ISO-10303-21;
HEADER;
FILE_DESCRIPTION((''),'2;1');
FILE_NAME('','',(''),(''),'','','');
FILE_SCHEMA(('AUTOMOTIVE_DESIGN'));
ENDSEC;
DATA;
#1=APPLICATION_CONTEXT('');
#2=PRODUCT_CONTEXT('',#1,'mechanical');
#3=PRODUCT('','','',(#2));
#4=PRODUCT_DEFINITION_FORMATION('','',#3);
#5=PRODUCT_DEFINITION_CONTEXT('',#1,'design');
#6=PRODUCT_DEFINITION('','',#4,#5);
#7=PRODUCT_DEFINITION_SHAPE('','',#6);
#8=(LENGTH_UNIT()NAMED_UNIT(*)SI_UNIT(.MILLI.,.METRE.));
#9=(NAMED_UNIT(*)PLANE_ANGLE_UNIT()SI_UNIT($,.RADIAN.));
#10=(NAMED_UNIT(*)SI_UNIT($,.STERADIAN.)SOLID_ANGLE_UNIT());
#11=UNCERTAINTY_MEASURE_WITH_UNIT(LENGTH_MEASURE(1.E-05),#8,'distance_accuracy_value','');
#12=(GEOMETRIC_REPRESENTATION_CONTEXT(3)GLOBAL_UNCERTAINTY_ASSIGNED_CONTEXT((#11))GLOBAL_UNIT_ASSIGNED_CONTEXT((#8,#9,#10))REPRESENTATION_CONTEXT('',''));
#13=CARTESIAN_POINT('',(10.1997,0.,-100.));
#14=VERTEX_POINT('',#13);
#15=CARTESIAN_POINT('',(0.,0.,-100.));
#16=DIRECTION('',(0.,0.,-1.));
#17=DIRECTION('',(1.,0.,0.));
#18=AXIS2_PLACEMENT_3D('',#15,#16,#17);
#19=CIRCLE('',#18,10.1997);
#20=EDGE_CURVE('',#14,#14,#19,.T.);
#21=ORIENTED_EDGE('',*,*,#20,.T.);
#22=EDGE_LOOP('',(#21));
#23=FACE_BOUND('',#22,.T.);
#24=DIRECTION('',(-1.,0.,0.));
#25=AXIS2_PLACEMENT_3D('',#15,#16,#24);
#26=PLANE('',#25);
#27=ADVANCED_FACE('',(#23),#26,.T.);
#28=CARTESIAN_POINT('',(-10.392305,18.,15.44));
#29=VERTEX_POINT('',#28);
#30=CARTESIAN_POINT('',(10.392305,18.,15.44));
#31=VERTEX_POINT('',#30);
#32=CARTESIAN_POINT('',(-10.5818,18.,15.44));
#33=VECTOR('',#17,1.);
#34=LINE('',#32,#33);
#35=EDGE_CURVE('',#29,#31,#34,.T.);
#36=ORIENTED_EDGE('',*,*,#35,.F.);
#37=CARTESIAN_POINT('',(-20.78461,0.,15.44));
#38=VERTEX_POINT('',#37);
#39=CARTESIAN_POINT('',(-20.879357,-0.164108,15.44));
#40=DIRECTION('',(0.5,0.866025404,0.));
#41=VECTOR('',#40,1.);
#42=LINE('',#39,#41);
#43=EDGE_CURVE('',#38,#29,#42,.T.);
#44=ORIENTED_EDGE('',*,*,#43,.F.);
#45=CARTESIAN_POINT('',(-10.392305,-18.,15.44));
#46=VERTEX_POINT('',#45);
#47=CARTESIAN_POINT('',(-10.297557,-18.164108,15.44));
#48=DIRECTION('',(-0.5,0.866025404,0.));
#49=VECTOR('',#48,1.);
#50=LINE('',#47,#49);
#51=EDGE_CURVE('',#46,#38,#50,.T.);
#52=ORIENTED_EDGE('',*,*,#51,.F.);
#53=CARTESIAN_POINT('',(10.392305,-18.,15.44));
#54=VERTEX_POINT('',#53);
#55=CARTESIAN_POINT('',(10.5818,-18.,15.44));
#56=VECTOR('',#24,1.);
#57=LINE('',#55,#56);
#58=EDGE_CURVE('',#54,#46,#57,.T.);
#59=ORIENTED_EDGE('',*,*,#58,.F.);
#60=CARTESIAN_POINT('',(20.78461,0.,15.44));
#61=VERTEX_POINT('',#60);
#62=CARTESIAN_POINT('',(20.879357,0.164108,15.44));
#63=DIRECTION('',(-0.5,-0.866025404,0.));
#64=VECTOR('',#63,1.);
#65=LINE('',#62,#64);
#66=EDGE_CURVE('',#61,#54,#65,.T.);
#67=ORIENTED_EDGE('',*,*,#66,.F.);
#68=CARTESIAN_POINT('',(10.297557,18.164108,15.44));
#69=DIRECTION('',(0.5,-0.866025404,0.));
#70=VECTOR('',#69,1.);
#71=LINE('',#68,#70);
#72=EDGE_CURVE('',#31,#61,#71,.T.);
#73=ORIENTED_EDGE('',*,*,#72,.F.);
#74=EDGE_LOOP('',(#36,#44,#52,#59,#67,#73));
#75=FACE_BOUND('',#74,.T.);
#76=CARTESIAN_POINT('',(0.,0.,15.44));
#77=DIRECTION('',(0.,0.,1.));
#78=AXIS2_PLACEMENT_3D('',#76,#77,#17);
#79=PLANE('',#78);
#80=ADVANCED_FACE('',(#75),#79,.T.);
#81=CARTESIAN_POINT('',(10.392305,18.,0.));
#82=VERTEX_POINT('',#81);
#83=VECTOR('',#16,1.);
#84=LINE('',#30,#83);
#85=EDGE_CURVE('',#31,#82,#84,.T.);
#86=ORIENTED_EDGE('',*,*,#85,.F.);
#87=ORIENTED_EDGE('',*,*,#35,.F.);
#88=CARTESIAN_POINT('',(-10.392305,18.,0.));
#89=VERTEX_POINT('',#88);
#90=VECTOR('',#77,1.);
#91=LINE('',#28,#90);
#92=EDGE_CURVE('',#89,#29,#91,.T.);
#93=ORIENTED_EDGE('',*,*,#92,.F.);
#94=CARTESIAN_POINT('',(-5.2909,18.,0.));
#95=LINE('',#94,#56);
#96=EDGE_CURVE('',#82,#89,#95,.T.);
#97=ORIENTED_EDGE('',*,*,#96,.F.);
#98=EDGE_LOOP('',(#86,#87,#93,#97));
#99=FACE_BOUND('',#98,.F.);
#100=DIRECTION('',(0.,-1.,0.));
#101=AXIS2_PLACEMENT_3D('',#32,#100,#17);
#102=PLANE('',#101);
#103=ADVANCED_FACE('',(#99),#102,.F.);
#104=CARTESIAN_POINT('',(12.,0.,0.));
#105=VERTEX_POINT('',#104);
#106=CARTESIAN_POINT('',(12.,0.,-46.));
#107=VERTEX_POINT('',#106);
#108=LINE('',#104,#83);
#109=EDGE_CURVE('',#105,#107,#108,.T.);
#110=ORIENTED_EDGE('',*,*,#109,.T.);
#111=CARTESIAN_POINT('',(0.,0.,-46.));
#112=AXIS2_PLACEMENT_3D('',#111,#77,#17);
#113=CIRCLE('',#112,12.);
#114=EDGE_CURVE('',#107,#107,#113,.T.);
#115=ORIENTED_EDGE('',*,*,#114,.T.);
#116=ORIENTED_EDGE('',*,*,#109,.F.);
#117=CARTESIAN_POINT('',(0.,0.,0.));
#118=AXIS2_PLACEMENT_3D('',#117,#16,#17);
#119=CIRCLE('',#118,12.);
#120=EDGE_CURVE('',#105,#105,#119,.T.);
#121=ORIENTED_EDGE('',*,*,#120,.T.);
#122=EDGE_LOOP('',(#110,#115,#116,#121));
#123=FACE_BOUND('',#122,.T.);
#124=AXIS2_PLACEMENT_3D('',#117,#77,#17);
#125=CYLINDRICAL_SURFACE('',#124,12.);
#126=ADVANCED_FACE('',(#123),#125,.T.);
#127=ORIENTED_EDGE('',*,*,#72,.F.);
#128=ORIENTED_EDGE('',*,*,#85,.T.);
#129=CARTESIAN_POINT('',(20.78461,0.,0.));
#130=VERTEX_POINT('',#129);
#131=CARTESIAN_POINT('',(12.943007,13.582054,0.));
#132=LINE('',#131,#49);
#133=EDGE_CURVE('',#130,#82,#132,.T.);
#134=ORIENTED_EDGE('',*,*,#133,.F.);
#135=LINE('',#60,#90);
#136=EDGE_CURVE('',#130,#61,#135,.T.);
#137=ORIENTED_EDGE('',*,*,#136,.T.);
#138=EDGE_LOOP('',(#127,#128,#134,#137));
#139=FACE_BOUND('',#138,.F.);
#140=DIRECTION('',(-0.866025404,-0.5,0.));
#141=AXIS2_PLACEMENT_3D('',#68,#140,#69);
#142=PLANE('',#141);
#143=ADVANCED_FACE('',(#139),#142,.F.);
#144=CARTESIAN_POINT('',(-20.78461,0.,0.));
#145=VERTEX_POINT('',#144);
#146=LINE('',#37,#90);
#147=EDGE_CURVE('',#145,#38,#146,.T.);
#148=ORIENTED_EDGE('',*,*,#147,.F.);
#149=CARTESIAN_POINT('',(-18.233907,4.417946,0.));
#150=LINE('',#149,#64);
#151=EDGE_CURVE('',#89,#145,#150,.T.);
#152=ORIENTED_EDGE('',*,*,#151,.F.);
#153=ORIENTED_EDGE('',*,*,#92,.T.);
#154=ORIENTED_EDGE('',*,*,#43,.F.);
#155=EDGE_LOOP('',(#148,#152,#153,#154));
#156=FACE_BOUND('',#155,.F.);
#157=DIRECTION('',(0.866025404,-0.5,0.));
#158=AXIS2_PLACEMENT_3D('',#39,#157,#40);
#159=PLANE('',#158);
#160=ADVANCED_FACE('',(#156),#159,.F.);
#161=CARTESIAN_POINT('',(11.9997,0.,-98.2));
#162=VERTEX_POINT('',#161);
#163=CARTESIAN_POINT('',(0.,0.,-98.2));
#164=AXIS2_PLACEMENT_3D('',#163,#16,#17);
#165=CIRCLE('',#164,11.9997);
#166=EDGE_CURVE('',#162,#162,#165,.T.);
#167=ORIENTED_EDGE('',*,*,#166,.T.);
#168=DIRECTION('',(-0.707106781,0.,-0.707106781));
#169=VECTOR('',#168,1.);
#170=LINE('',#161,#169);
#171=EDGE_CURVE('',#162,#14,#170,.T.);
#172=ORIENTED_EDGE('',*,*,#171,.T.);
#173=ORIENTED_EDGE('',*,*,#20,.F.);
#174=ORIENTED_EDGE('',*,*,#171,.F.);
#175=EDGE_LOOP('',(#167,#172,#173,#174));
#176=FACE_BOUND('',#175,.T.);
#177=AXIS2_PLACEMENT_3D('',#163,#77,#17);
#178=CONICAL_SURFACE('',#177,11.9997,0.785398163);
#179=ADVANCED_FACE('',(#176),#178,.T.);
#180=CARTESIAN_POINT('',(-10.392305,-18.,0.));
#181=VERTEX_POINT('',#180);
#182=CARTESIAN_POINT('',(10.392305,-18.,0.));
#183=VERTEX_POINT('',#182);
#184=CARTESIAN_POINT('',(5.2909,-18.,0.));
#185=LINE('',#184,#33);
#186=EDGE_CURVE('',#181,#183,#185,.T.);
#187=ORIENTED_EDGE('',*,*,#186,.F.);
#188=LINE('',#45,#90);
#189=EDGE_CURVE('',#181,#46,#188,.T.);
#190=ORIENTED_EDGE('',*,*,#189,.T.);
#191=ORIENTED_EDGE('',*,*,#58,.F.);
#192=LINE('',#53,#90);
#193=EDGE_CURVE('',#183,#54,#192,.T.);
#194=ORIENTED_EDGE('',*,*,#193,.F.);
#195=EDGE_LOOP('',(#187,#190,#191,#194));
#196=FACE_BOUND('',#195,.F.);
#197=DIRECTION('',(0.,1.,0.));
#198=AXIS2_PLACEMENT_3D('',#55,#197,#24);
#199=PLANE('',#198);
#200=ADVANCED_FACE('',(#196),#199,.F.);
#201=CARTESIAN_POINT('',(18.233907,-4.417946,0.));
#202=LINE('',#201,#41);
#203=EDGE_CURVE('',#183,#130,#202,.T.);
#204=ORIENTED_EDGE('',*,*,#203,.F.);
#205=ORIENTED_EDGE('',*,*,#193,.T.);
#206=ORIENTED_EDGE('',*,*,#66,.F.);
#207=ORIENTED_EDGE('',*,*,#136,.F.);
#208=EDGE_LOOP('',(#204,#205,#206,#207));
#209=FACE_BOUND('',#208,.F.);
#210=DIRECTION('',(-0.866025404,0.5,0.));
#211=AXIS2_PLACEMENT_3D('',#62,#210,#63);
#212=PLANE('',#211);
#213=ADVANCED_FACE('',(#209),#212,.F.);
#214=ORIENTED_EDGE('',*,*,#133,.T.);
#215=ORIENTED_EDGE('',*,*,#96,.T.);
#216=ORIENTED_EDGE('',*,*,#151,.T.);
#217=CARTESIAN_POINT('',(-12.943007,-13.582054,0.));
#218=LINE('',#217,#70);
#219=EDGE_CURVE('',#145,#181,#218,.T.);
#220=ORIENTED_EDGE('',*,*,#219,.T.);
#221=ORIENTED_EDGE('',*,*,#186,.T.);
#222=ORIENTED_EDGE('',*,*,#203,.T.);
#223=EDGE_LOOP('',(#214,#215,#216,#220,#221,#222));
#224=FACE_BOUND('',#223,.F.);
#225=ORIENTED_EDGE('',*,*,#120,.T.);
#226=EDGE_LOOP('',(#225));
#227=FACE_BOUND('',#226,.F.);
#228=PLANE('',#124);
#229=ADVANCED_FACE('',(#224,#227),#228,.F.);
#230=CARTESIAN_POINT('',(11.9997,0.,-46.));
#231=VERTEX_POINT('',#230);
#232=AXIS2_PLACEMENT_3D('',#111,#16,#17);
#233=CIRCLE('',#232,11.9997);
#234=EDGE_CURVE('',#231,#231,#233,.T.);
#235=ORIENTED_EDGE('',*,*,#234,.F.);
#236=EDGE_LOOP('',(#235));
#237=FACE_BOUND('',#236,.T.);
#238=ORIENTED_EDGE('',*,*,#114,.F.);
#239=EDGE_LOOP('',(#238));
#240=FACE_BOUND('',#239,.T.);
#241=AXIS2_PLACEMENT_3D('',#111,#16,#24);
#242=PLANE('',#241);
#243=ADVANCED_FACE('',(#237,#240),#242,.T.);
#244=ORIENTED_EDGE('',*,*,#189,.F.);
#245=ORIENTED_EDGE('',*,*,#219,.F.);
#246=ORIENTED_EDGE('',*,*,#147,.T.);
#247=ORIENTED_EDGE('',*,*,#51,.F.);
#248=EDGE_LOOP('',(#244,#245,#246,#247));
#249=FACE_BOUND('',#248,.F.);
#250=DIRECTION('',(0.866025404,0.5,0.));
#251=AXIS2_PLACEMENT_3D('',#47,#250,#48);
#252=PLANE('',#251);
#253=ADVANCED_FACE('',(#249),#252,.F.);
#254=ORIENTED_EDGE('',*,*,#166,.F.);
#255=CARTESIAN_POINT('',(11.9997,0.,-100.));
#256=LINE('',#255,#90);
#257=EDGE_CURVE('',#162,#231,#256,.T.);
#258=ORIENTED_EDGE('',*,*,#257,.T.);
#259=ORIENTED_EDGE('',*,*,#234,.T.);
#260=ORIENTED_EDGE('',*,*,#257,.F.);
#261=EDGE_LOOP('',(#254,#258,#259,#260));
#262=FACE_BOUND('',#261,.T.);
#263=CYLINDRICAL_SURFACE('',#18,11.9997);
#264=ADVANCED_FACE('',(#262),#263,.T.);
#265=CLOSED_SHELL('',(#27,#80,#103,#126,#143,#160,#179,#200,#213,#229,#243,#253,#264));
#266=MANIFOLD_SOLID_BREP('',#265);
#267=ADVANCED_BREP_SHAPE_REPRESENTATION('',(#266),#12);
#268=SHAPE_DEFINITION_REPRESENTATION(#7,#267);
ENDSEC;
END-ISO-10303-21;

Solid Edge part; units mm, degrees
sketch "Sketch1" plane through (0, 0, 0) normal (0, 0, 1) x (1, 0, 0)
  circle A0 centre (0, 0) radius 20.88
  dimension "D1" = 41.76
extrude "Protrusion1" add sketch "Sketch1" along normal blind 15.44
sketch "Sketch2" plane through (0, 0, 0) normal (0, 0, -1) x (1, 0, 0)
  circle A0 centre (0, 0) radius 12
extrude "Protrusion2" add sketch "Sketch2" along normal blind 100
sketch "Sketch3" plane through (0, 0, -100) normal (0, 0, -1) x (1, 0, 0)
  circle A0 centre (0, 0) radius 11.9997
extrude "Cutout1" cut sketch "Sketch3" against normal blind 54 flip side to cut
chamfer "Chamfer_1" distance 1.8 angle 45 1 edges at (-11.9997, 0, -100)
sketch "Sketch4" plane through (0, 0, 15.44) normal (0, 0, 1) x (1, 0, 0)
  line L0 (-10.5818, 18) -> (10.5818, 18)
  dimension "D1" = 36
extrude "Cutout2" cut sketch "Sketch4" against normal up to next material side at (0, 18.05, 15.44)
pattern_circular "Pattern1" count 6 over 360 about axis through (0, 0, 15.44) along (0, 0, 1) of "Cutout2"
properties part number "300544"
